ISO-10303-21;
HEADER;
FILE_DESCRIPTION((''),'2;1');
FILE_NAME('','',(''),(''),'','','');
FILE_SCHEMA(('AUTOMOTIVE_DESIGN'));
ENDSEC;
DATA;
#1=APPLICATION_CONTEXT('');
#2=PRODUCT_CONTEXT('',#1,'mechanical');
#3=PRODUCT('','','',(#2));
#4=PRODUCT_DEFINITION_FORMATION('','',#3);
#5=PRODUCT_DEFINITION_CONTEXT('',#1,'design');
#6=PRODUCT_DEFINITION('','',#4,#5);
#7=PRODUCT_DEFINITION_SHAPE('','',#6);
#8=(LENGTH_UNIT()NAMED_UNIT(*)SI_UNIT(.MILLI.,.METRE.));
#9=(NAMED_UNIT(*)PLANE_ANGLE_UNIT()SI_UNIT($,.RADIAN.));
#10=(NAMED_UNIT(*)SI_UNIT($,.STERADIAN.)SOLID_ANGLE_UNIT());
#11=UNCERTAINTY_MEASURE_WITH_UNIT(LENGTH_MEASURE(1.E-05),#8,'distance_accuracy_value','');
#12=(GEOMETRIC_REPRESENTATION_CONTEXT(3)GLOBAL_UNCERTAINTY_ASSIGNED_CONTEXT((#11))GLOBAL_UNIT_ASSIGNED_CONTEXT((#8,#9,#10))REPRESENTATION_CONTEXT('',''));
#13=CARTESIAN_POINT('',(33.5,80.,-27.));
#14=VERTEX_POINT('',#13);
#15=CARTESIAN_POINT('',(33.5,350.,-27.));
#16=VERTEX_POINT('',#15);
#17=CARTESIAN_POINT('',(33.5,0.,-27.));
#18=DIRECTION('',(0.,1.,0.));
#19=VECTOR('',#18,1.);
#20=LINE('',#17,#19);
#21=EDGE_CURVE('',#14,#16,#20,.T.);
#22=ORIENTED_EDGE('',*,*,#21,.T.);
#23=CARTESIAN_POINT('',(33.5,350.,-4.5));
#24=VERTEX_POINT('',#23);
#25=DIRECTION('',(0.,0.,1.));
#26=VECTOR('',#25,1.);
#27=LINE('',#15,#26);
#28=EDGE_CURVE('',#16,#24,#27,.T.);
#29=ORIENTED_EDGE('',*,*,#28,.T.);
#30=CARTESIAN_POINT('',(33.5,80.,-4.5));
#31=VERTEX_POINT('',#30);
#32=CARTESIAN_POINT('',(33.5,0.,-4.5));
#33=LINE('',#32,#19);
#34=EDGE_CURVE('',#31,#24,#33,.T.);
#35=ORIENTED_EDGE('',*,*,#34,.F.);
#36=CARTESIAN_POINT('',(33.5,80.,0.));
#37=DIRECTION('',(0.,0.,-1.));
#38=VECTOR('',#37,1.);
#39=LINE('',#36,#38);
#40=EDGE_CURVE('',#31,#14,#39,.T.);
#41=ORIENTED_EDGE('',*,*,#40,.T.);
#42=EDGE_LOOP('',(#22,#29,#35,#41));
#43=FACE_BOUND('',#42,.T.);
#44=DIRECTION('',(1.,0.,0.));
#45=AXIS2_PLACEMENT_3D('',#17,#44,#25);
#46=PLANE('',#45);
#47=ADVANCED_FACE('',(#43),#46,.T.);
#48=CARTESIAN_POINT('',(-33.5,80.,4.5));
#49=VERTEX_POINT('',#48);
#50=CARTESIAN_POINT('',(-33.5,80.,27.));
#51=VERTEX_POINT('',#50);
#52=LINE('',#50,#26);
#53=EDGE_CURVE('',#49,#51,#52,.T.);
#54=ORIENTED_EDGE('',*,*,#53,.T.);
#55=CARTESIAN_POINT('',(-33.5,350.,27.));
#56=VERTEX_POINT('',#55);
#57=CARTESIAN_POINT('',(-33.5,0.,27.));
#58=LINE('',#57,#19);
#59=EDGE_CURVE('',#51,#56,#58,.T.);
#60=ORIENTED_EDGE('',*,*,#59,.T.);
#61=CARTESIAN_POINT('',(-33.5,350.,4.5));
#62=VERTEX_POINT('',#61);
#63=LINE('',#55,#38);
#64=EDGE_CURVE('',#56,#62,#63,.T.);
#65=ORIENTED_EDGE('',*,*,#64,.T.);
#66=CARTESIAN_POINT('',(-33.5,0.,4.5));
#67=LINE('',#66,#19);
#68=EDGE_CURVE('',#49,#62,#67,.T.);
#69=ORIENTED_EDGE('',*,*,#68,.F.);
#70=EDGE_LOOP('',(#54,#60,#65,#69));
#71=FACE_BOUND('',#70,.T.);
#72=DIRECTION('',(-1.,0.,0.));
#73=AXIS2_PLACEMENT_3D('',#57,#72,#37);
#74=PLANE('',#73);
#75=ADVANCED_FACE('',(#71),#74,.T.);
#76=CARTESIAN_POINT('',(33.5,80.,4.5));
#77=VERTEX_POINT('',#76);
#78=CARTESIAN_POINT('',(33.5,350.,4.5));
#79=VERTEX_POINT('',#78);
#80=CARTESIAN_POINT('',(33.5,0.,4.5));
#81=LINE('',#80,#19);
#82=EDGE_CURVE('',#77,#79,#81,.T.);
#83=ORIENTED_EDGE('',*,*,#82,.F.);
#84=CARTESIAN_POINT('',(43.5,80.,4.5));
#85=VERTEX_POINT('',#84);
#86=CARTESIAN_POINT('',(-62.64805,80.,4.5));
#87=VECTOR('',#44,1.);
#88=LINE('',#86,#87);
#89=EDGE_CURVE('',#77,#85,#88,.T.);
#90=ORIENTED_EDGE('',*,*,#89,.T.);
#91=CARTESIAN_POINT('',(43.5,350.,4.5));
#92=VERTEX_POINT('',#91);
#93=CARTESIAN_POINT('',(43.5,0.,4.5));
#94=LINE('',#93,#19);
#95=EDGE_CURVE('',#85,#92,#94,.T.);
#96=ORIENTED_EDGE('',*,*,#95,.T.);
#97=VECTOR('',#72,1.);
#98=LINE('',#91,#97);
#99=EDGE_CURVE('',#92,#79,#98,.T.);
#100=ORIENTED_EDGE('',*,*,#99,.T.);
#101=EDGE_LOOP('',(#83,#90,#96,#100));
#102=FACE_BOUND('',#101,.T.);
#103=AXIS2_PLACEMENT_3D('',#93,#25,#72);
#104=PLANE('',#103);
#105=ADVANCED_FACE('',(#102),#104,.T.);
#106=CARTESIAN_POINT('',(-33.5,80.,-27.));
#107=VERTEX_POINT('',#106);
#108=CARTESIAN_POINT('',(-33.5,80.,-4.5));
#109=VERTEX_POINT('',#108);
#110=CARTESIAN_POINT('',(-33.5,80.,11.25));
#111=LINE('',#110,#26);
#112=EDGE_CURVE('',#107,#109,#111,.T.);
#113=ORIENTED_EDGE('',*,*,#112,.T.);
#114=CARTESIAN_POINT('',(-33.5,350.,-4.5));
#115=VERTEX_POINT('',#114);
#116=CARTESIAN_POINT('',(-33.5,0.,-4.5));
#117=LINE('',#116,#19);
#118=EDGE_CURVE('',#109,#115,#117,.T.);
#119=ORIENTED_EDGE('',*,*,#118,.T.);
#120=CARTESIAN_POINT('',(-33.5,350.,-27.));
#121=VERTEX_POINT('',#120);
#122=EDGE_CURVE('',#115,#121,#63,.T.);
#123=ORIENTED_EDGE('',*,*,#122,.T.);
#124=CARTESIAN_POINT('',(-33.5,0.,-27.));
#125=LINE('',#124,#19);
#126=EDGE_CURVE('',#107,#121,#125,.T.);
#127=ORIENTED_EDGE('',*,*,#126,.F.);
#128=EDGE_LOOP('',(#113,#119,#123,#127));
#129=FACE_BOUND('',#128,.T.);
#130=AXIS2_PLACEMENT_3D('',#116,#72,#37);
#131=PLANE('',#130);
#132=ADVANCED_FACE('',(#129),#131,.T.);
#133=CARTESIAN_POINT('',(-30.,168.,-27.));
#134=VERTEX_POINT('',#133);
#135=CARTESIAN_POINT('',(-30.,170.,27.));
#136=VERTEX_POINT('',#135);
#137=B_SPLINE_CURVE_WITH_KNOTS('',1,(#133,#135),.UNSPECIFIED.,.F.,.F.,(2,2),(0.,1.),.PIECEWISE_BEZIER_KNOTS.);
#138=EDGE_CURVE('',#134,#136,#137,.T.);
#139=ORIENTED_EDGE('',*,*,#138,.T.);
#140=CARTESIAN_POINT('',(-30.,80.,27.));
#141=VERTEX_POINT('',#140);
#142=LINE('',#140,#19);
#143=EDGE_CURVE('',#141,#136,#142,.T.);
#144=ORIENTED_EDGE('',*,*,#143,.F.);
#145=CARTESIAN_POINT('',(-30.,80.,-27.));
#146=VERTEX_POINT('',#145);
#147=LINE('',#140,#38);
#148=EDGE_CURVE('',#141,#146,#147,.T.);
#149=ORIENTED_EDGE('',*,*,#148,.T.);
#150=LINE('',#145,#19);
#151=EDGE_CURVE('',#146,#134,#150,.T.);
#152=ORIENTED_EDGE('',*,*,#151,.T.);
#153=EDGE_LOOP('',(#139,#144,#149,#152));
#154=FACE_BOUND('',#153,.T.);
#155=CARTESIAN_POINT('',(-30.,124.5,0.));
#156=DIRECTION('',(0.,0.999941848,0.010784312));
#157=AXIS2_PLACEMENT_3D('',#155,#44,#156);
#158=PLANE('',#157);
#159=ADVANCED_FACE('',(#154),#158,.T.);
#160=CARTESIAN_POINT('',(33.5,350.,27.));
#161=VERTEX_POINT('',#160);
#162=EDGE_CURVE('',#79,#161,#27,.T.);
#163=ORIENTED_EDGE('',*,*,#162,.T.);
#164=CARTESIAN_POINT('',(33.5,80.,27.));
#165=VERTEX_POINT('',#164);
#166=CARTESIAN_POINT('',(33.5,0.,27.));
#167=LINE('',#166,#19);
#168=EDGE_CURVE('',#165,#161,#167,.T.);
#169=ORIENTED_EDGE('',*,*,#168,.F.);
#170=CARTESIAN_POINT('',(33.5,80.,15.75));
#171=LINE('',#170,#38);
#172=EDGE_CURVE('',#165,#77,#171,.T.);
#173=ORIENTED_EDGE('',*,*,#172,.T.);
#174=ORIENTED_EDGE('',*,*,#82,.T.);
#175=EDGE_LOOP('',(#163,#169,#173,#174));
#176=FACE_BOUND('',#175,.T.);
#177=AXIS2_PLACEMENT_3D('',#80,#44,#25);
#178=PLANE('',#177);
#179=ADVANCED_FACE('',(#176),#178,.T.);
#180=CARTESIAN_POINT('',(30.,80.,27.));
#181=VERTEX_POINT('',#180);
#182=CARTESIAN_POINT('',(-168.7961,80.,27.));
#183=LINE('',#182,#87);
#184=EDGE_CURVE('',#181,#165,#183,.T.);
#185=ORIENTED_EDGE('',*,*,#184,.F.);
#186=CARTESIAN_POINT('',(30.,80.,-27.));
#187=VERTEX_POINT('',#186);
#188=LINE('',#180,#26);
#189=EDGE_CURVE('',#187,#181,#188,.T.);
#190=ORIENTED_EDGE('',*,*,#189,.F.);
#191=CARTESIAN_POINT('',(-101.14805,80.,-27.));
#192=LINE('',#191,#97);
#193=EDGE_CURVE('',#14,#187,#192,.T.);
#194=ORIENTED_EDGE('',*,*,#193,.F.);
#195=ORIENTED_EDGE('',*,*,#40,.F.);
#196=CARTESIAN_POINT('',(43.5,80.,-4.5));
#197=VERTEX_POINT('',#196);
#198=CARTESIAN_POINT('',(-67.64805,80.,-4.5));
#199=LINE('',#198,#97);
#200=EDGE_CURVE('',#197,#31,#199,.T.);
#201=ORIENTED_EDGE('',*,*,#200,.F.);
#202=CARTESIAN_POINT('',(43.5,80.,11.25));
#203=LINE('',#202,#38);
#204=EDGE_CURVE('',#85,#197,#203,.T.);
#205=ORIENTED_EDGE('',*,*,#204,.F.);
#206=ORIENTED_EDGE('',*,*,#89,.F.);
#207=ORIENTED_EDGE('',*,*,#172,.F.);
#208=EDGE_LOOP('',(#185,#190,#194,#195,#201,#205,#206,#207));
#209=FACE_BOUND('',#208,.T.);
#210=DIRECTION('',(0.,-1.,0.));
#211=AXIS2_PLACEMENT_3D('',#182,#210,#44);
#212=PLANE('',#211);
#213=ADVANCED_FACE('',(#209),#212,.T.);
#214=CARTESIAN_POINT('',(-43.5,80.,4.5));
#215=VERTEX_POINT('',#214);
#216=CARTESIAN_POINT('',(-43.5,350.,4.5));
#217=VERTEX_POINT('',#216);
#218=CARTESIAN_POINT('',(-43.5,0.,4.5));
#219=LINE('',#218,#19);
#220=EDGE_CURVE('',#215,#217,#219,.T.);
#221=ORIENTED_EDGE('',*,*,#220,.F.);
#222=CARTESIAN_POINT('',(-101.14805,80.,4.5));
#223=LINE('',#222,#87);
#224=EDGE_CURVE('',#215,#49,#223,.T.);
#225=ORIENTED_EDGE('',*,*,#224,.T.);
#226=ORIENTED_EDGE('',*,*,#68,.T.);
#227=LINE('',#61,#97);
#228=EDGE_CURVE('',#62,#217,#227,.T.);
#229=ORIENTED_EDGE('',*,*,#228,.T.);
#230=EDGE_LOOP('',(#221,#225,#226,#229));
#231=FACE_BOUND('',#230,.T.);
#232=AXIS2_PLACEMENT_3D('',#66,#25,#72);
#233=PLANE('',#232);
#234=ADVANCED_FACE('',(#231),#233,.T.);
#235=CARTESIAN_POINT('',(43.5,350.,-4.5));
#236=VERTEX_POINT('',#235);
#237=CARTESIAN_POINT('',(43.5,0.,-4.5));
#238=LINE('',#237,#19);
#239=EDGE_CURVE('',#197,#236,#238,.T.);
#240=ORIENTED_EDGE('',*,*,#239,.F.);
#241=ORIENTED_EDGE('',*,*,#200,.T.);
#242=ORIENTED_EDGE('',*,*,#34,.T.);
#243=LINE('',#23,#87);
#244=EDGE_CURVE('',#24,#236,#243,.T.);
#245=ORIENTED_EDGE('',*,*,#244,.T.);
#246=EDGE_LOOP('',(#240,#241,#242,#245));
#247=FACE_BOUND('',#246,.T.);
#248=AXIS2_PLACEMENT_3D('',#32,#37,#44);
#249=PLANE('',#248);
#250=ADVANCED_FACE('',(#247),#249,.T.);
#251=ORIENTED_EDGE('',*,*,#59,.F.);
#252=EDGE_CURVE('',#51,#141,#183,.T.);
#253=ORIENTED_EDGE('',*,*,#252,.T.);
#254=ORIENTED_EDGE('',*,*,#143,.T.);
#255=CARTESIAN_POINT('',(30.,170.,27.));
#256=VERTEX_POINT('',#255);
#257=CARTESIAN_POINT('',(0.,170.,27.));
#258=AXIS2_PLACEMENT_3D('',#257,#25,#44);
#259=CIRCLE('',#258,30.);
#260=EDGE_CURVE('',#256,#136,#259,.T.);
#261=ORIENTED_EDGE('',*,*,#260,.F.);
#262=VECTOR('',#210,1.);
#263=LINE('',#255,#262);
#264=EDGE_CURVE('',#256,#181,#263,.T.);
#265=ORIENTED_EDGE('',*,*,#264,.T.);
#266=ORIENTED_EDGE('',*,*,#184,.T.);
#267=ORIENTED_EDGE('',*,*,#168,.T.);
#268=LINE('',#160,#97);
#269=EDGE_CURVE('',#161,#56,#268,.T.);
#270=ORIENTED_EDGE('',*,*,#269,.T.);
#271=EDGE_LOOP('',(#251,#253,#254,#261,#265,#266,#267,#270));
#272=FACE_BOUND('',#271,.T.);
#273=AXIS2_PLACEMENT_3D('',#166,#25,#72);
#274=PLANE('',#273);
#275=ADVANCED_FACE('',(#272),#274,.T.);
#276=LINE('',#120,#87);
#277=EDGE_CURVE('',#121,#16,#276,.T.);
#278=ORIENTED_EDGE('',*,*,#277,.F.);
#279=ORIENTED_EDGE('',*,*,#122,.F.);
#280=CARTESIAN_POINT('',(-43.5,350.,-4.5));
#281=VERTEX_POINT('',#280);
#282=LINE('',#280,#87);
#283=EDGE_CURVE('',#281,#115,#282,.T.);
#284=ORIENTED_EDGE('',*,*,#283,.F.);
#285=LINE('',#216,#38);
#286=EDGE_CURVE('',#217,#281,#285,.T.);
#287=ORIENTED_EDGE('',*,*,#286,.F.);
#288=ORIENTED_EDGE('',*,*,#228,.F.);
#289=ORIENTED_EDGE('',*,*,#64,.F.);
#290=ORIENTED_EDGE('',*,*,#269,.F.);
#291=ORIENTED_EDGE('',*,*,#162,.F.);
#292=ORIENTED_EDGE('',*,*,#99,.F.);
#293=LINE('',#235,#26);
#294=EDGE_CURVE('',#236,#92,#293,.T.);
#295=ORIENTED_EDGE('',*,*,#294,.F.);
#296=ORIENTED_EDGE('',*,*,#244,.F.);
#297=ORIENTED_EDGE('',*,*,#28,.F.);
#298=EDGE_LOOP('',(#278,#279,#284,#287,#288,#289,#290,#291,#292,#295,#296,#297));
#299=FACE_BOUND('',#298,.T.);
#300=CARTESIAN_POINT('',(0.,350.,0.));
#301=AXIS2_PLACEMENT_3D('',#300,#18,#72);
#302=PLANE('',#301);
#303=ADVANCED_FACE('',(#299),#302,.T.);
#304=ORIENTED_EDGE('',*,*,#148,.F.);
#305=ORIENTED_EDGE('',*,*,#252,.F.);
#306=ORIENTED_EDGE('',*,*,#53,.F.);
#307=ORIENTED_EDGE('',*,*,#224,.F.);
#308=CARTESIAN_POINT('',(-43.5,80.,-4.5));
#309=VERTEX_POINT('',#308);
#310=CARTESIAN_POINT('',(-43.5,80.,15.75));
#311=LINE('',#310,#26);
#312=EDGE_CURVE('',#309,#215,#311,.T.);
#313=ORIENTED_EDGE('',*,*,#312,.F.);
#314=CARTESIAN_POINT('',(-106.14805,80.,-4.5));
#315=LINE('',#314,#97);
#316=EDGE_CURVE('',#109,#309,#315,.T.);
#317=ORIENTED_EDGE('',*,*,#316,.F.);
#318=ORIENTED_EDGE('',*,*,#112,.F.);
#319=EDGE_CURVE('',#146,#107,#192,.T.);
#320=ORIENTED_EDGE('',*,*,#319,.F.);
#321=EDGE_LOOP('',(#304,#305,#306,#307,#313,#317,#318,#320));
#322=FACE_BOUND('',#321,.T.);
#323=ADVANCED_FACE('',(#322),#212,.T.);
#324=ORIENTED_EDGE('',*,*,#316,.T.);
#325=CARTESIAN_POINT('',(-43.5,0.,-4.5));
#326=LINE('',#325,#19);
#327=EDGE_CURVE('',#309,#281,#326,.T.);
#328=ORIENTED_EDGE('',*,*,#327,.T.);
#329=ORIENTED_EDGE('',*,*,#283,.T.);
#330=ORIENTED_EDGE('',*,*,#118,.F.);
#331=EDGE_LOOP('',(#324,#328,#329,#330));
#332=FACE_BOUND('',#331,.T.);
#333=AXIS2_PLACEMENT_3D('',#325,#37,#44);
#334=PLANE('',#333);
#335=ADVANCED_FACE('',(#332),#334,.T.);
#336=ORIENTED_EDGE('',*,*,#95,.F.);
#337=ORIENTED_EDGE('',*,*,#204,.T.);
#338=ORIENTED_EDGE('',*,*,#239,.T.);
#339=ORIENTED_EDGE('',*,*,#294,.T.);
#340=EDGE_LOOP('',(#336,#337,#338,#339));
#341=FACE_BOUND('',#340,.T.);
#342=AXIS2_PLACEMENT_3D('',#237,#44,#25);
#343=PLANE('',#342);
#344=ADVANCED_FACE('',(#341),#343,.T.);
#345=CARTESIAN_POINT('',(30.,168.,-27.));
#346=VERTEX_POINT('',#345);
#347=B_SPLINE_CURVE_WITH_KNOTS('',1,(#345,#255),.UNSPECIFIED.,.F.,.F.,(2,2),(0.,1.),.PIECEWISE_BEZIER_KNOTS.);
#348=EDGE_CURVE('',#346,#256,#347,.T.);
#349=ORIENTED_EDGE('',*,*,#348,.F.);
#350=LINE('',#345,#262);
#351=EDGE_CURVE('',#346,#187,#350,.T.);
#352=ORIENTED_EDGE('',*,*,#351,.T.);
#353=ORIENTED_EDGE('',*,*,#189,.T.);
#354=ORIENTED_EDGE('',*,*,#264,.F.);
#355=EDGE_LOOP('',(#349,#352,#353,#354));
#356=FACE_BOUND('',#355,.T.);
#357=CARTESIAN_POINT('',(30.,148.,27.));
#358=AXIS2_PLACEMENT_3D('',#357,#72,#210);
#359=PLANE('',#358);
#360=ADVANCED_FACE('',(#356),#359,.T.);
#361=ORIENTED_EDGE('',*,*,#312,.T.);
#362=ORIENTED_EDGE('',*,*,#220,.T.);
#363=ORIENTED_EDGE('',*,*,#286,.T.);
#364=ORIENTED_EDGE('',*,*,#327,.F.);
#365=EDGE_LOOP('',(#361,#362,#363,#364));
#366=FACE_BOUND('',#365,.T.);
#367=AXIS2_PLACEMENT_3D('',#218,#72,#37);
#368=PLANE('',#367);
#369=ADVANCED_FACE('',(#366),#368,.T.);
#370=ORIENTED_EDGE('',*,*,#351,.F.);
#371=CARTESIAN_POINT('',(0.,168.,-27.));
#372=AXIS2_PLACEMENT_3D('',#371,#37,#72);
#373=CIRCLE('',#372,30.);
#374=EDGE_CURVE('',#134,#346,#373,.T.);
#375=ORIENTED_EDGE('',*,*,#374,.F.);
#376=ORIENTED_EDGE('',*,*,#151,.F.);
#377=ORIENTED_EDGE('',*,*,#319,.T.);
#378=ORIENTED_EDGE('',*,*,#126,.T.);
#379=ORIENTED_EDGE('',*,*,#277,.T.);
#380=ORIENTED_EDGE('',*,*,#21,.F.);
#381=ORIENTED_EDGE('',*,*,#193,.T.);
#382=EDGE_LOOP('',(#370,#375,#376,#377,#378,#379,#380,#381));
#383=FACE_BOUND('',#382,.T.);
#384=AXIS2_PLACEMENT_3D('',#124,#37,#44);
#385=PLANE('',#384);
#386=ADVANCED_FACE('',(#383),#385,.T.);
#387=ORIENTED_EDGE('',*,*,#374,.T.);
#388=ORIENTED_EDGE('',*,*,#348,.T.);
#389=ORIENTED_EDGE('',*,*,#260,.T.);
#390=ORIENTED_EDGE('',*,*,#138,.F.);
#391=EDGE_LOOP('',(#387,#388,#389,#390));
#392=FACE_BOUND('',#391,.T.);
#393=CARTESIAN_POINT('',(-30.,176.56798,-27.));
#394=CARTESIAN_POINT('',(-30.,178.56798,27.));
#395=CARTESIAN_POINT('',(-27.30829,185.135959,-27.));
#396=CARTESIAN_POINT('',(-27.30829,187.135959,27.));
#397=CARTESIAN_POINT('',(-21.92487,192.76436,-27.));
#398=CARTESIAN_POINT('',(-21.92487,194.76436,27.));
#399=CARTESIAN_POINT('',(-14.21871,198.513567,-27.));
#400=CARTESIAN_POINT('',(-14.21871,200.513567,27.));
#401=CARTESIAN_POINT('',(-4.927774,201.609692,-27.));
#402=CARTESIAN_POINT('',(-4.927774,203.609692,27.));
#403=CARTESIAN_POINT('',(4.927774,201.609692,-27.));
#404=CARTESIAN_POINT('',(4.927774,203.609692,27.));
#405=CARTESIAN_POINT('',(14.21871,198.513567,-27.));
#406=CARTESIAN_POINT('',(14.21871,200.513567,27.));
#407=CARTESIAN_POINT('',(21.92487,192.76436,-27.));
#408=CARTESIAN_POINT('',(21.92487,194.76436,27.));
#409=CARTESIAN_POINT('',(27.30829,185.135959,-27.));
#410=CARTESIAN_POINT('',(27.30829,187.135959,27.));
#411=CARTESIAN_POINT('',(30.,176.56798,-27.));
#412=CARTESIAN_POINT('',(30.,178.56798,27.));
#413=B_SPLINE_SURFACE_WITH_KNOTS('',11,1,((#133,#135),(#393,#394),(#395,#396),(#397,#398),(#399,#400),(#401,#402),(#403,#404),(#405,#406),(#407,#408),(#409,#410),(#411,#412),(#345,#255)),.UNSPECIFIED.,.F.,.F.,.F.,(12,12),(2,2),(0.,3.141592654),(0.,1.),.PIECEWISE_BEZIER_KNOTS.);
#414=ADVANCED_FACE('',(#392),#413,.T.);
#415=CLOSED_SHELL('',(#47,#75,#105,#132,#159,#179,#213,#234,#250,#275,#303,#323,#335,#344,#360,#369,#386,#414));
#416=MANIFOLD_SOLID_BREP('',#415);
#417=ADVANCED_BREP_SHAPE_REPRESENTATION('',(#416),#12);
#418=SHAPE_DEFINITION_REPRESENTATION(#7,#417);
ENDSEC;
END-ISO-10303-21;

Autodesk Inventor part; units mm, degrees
ref_plane "YZ Plane" through (0, 0, 0) normal (1, 0, 0) x (0, 1, 0)
ref_plane "XZ Plane" through (0, 0, 0) normal (0, 1, 0) x (-1, 0, 0)
ref_plane "XY Plane" through (0, 0, 0) normal (0, 0, 1) x (1, 0, 0)
sketch "草圖1" plane through (0, 0, 0) normal (0, 1, 0) x (-1, 0, 0)
  line L0 (-33.5, 27) -> (33.5, 27)
  line L1 (33.5, 27) -> (33.5, -27)
  line L2 (33.5, -27) -> (-33.5, -27)
  line L3 (-33.5, -27) -> (-33.5, 27)
  line L4 (-33.5, 27) -> (33.5, -27) construction
  line L5 (33.5, 27) -> (-33.5, -27) construction
  line L6 (43.5, -4.5) -> (33.5, -4.5)
  line L7 (33.5, -4.5) -> (33.5, 4.5)
  line L8 (33.5, 4.5) -> (43.5, 4.5)
  line L9 (43.5, 4.5) -> (43.5, -4.5)
  line L10 (-33.5, -4.5) -> (-43.5, -4.5)
  line L11 (-43.5, -4.5) -> (-43.5, 4.5)
  line L12 (-43.5, 4.5) -> (-33.5, 4.5)
  line L13 (-33.5, 4.5) -> (-33.5, -4.5)
  point P0 (0, 0)
  point P1 (33.5, 0)
  point P2 (-33.5, 0)
  point P3 (-33.5, 4.5)
  point P4 (-33.5, -4.5)
  dimension "d0" = 67
  dimension "d1" = 54
  dimension "d2" = 9
  dimension "d3" = 10
extrude "擠出1" add sketch "草圖1" along normal blind 350
sketch "草圖2" plane through (-33.5, 0, 27) normal (0, 0, 1) x (1, 0, 0)
  line L0 (0, 0) -> (0, 350) projected
  line L1 (0, 350) -> (67, 350) projected
  line L2 (67, 350) -> (67, 0) projected
  line L3 (67, 0) -> (0, 0) projected
  circle A0 centre (33.5, 148) radius 30
  line L4 (3.5, 148) -> (63.5, 148)
  line L5 (63.5, 148) -> (63.5, -3.654)
  line L6 (63.5, -3.654) -> (3.5, -3.654)
  line L7 (3.5, -3.654) -> (3.5, 148)
  point P0 (33.5, 0)
  point P1 (33.5, 0)
  point P2 (63.5, 148)
  point P3 (3.5, 148)
  dimension "d6" = 148
  dimension "d7" = 60
extrude "擠出2" cut sketch "草圖2" against normal through all contours L7 A0 L5 L3 | L3 L5 L6 L7 | L4 A0 | A0 L4
sketch "草圖3" plane through (-33.5, 350, 27) normal (0, 0, 1) x (1, 0, 0)
  line L0 (-135.2961, -270) -> (202.2961, -270)
  line L1 (202.2961, -270) -> (202.2961, -350)
  line L2 (202.2961, -350) -> (-135.2961, -350)
  line L3 (-135.2961, -350) -> (-135.2961, -270)
  point P0 (33.5, -350)
  point P1 (33.5, -350)
  dimension "d10" = 80
extrude "擠出3" cut sketch "草圖3" against normal through all
sketch "草圖4" plane through (33.5, 350, -27) normal (0, 0, -1) x (-1, 0, 0)
  arc A0 (63.5, -202) -> (3.5, -202) centre (33.5, -202) ccw construction
  circle A1 centre (33.5, -182) radius 30
  line L0 (63.5, -270) -> (3.5, -270)
  line L1 (3.5, -270) -> (3.5, -182)
  line L2 (3.5, -182) -> (63.5, -182)
  line L3 (63.5, -182) -> (63.5, -270)
  line L4 (63.5, -270) -> (67, -270) projected
  point P0 (33.5, -350)
  point P1 (65.25, -270)
  dimension "d13" = 20
  dimension "d14" = 60
sketch "草圖5" plane through (-33.5, 350, 27) normal (0, 0, 1) x (1, 0, 0)
  arc A0 (63.5, -202) -> (3.5, -202) centre (33.5, -202) ccw construction
  circle A1 centre (33.5, -180) radius 30
  line L0 (63.5, -270) -> (3.5, -270)
  line L1 (3.5, -270) -> (3.5, -180)
  line L2 (3.5, -180) -> (63.5, -180)
  line L3 (63.5, -180) -> (63.5, -270)
  point P0 (33.5, -350)
  point P1 (63.5, -270)
  dimension "d15" = 22
  dimension "d16" = 60
loft "斷面混成1" cut profiles "草圖4", "草圖5"
properties part number "Slider-6"
